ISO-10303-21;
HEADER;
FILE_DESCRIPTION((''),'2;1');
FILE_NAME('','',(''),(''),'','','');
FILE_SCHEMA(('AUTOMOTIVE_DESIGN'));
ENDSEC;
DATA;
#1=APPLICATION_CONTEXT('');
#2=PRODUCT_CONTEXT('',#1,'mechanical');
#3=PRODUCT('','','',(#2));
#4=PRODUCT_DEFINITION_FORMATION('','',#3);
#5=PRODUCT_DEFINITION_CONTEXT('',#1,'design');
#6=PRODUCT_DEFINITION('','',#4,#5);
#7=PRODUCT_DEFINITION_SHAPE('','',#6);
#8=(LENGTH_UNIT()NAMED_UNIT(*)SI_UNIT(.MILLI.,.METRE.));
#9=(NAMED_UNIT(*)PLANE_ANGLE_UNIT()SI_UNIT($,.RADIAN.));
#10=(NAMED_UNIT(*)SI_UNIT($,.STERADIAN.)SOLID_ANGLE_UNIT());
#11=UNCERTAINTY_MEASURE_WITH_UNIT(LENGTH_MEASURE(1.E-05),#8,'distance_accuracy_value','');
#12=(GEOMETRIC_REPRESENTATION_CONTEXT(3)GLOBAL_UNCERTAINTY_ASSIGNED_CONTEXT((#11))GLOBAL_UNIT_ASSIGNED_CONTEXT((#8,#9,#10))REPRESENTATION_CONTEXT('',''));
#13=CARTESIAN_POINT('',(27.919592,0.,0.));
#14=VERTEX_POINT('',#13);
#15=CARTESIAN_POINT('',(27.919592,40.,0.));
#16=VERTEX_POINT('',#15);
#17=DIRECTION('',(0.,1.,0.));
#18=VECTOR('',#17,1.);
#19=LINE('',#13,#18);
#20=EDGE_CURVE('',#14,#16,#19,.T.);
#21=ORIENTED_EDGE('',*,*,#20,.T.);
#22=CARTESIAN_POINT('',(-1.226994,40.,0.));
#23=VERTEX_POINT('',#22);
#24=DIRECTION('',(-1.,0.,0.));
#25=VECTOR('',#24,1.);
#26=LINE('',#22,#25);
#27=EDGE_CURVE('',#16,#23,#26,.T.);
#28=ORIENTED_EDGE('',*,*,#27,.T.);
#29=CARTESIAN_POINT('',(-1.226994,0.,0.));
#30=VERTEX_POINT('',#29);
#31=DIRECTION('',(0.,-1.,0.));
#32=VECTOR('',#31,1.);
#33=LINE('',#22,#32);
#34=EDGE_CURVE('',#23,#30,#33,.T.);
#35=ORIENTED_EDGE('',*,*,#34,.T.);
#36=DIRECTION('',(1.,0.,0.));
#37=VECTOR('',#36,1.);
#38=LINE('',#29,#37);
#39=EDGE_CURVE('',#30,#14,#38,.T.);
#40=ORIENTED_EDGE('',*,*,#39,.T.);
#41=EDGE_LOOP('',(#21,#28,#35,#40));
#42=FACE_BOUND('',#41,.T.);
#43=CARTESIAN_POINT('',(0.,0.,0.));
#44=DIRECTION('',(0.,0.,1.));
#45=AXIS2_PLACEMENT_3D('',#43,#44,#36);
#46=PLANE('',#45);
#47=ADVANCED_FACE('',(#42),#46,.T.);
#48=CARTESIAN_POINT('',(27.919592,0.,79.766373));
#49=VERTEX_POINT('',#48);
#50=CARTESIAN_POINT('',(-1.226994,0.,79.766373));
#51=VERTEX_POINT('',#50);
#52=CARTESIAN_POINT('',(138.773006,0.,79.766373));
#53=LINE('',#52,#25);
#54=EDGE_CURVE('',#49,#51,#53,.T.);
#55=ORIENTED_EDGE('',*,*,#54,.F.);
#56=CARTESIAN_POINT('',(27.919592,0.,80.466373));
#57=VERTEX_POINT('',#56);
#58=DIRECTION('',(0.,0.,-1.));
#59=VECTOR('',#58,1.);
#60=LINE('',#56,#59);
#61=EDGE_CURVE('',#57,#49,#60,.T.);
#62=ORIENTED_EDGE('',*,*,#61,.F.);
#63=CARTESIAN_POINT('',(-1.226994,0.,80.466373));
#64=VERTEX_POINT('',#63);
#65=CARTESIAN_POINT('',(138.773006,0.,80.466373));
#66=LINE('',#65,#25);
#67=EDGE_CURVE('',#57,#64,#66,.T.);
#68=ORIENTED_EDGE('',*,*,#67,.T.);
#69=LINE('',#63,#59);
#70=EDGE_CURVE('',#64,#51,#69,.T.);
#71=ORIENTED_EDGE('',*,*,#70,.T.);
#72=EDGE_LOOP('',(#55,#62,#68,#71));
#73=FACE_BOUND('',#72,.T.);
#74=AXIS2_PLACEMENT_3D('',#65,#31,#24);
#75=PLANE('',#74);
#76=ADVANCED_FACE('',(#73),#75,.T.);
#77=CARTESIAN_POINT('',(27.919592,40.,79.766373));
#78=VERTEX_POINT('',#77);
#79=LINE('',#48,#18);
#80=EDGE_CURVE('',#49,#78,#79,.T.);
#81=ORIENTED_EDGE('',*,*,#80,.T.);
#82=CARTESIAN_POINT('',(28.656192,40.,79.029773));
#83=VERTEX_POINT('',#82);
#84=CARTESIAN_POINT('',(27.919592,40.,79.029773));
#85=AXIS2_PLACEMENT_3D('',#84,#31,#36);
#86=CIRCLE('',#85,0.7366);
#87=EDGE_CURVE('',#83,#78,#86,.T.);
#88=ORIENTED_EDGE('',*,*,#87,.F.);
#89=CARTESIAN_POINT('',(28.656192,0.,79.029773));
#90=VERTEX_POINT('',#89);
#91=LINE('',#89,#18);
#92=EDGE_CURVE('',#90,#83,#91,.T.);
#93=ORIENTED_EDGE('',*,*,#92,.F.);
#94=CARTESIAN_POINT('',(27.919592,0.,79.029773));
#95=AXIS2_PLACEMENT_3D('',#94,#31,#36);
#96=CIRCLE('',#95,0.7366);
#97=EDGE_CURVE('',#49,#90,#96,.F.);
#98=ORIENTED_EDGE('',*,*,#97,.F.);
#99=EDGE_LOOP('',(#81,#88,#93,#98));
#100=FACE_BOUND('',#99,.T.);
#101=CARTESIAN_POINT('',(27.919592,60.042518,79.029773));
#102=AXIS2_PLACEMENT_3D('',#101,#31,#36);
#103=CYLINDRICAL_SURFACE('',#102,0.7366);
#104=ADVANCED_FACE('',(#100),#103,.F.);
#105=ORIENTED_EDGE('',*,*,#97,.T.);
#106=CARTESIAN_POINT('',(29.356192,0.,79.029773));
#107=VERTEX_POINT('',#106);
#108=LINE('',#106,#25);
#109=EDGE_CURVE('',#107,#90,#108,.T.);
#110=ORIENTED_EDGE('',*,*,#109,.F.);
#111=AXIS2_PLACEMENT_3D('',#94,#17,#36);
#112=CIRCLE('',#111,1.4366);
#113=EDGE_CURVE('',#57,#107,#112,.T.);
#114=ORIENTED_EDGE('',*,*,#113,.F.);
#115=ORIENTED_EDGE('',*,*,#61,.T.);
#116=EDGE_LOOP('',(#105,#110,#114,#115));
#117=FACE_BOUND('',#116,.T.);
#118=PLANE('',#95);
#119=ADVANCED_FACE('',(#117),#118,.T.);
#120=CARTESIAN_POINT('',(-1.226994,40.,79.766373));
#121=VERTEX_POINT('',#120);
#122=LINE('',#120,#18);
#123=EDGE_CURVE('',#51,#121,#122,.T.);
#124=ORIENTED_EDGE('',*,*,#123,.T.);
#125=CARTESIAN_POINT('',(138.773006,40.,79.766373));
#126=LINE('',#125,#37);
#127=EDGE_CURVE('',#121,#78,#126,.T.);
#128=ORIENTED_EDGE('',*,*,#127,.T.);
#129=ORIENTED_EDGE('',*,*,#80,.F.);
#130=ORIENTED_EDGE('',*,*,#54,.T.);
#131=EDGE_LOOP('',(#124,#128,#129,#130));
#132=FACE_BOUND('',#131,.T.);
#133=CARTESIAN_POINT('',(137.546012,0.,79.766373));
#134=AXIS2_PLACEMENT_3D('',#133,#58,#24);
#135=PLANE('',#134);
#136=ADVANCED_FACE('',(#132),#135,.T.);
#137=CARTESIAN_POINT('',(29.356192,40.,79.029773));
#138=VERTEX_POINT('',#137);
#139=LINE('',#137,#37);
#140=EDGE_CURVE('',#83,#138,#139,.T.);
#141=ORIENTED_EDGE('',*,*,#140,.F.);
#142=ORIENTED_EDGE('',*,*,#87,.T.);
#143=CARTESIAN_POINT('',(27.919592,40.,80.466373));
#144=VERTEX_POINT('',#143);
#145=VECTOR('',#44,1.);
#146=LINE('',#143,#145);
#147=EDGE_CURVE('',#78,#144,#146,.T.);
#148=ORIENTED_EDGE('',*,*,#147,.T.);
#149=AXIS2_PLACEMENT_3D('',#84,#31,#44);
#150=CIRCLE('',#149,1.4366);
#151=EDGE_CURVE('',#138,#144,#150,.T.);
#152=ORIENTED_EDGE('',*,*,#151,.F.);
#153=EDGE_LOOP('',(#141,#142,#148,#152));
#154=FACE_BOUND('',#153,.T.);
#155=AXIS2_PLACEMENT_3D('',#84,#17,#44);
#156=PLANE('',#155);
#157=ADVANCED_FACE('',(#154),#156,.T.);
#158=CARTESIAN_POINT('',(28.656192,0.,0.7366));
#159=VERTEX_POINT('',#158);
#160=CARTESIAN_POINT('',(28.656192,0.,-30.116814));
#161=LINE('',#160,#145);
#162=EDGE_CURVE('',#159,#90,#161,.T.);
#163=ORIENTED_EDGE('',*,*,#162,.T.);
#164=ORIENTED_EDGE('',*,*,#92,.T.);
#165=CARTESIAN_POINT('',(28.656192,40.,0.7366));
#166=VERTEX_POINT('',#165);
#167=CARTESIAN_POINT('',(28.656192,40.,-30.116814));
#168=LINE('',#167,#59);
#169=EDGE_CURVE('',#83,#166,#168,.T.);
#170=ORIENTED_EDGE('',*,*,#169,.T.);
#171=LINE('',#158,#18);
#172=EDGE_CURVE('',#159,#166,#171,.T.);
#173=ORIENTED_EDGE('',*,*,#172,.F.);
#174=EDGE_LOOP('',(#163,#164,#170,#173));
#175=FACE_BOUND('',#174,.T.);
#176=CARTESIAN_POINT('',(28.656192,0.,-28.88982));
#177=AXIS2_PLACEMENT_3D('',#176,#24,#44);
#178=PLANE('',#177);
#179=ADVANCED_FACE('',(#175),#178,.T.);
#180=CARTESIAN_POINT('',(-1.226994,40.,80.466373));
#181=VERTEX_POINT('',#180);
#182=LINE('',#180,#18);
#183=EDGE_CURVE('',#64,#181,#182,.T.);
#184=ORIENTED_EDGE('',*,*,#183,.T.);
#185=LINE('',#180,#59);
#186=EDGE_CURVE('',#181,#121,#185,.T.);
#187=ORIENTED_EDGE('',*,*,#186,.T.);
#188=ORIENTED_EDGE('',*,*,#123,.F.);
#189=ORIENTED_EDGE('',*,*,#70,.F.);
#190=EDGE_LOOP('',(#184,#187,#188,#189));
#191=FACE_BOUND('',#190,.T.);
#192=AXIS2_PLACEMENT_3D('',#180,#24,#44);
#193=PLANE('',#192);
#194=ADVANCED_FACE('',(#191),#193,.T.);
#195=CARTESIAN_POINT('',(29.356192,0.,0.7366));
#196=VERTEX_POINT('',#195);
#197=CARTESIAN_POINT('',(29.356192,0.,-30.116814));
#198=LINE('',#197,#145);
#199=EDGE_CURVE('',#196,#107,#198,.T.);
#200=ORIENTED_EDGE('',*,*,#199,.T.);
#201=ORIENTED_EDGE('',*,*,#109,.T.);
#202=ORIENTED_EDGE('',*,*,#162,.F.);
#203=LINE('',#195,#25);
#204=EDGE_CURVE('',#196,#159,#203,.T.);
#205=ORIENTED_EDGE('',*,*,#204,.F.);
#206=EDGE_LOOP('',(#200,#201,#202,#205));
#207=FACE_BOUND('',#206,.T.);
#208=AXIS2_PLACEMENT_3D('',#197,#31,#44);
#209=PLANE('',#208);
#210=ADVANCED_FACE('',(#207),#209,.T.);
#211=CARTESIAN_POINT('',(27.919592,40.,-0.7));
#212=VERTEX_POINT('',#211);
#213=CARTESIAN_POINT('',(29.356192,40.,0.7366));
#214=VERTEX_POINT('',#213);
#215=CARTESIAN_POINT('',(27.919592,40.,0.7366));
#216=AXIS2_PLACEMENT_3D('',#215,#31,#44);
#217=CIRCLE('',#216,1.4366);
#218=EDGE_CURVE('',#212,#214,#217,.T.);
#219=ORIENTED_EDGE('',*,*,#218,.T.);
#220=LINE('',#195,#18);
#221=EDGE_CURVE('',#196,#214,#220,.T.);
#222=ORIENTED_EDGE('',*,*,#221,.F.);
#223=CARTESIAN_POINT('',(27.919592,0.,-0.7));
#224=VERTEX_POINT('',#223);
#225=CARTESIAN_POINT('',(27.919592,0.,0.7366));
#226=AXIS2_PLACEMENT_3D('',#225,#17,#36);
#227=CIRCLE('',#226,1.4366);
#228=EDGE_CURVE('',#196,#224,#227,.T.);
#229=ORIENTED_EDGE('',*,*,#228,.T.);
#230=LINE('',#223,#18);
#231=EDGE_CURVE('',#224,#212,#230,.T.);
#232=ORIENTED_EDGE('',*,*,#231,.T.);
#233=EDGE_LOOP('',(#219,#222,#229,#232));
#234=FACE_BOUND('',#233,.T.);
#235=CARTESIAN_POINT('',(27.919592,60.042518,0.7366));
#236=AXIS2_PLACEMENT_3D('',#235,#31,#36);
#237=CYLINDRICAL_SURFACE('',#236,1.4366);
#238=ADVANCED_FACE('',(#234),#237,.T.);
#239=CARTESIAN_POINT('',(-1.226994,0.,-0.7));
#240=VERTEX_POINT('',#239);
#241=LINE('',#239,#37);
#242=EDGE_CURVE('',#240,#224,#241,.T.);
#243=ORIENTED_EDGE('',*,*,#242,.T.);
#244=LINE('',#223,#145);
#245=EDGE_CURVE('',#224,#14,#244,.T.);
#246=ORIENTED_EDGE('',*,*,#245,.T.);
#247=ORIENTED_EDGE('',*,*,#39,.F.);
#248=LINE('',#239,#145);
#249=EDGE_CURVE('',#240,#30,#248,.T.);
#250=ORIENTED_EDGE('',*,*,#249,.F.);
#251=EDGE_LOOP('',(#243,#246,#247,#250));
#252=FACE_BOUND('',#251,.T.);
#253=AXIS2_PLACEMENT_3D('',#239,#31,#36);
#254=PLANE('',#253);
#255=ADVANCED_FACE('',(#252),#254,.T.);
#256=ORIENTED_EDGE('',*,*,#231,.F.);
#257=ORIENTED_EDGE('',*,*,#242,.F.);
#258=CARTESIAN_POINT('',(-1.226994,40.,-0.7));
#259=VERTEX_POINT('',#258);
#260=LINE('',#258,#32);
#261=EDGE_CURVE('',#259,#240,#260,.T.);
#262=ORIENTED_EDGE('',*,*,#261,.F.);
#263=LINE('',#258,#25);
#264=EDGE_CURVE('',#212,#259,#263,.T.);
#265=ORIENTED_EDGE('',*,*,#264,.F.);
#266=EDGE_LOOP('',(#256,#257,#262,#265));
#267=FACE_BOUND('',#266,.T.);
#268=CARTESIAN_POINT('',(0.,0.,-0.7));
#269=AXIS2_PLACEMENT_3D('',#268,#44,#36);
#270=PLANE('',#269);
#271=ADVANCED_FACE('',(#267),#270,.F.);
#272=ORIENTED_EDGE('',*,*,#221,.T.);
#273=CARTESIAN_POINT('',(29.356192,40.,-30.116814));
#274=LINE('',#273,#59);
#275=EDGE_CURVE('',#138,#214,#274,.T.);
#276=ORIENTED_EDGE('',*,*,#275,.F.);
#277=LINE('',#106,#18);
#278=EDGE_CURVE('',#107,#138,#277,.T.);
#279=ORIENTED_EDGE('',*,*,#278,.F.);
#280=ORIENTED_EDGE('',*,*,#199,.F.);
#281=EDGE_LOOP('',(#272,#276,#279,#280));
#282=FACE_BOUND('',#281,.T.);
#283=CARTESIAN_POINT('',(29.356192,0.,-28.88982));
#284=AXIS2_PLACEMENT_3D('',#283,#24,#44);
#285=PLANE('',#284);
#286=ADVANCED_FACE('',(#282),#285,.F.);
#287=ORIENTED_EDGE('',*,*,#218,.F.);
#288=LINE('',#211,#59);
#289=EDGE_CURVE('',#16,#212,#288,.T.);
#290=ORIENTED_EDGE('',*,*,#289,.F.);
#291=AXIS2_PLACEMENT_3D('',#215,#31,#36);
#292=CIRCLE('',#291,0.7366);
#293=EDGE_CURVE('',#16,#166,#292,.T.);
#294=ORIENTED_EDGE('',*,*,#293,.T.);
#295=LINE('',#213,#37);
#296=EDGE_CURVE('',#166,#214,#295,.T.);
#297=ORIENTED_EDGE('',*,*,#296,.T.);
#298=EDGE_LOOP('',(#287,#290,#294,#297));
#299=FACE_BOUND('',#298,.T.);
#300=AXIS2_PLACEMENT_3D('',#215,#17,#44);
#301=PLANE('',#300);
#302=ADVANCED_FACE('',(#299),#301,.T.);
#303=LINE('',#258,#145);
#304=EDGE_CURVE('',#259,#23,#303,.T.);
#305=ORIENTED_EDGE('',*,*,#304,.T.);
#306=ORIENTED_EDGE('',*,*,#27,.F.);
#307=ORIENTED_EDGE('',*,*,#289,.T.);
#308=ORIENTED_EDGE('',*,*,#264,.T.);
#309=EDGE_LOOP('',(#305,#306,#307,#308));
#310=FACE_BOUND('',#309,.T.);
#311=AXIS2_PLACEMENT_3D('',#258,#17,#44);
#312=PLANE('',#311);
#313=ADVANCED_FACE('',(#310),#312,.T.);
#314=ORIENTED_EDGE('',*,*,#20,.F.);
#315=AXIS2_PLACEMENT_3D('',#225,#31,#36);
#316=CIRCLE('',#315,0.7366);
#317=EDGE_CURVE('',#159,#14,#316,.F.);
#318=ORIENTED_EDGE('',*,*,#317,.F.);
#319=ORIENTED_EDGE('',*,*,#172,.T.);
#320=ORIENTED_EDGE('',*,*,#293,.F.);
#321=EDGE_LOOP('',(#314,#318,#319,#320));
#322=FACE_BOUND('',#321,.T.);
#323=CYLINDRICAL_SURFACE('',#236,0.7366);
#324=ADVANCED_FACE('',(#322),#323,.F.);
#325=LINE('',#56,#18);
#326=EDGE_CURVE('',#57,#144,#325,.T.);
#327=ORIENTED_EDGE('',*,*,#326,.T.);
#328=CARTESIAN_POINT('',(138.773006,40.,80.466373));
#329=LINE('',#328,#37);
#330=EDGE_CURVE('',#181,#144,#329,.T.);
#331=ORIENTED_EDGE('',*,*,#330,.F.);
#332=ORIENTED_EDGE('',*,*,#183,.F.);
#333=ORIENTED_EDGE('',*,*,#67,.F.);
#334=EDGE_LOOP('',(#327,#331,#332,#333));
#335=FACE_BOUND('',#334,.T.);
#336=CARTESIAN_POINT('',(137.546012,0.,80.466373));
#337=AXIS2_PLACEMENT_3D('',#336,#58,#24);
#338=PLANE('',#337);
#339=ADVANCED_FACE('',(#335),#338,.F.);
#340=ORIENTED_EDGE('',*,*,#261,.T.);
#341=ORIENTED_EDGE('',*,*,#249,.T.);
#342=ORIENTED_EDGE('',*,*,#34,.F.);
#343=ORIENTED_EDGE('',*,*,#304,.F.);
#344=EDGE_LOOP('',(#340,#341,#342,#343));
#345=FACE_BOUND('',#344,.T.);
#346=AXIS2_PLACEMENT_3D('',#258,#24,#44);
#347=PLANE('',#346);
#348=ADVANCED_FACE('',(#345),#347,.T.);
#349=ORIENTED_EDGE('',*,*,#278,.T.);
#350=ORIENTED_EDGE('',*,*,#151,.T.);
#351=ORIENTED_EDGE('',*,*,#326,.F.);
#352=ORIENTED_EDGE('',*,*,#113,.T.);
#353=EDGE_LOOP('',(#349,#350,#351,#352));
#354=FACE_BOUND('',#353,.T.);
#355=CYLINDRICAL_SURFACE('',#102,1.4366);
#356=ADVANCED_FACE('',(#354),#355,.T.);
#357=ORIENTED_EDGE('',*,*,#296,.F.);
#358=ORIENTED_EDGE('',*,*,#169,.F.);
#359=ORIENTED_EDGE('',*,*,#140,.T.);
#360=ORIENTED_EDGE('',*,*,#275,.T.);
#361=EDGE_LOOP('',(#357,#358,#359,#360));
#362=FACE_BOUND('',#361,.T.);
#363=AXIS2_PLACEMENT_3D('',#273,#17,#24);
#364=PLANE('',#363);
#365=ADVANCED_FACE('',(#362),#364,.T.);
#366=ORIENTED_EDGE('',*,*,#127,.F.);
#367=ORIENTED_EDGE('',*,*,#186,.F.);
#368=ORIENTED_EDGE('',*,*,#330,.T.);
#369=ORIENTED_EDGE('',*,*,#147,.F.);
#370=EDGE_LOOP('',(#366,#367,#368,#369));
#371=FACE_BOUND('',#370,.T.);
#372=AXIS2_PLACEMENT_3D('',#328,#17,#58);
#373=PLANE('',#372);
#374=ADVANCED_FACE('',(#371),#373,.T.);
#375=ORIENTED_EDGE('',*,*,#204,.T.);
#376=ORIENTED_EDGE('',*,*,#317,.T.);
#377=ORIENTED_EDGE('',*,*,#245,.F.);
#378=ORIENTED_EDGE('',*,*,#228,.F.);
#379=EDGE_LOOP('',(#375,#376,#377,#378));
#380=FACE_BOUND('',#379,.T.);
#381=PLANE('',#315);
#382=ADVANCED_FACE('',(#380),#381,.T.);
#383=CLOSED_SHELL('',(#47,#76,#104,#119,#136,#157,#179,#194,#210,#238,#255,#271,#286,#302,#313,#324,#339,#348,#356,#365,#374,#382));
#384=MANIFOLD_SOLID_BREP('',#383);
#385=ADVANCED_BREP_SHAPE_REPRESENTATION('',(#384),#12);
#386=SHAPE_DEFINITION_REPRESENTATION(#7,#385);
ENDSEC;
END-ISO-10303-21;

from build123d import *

# Parameters (mm, degrees)
SKETCH1_W              = 140
SKETCH1_H              = 40
BASE_FLANGE1_DEPTH     = 0.7
SKETCHED_BEND1_DEPTH   = 40
SKETCHED_BEND1_2_DEPTH = 40


# Read off the part's stored shape, not the designer's step: Sketched Bend1
# Sheet-metal steps are written as plain solids
with BuildPart() as part:
    # Sketch1 → Base-Flange1 (new body)
    with BuildSketch(Plane.XY):
        with Locations((68.773006135, 20)):
            Rectangle(SKETCH1_W, SKETCH1_H)
    extrude(amount=-BASE_FLANGE1_DEPTH)

    # Sketched Bend1 outline → Sketched Bend1 (cut)
    with BuildSketch(Plane(origin=(0, 0, 0), x_dir=(1, 0, 0), z_dir=(0, 1, 0))):
        with BuildLine():
            ThreePointArc((27.919592491, 0.7), (28.628683458, 0.512803681), (29.152978075, 0))
            Line((29.152978075, 0), (138.773006135, 0))
            Line((138.773006135, 0), (138.773006135, 0.7))
            Line((138.773006135, 0.7), (27.919592491, 0.7))
        make_face()
    extrude(amount=SKETCHED_BEND1_DEPTH, mode=Mode.SUBTRACT)

    # Sketched Bend1 2 outline → Sketched Bend1 2 (add)
    with BuildSketch(Plane(origin=(0, 0, 0), x_dir=(1, 0, 0), z_dir=(0, 1, 0))):
        with BuildLine():
            ThreePointArc((27.919592491, 0), (28.440447346, -0.215745145), (28.656192491, -0.7366))
            Line((28.656192491, -0.7366), (28.656192491, -79.029772711))
            ThreePointArc((28.656192491, -79.029772711), (28.440447346, -79.550627566), (27.919592491, -79.766372711))
            Line((27.919592491, -79.766372711), (-1.226993865, -79.766372711))
            Line((-1.226993865, -79.766372711), (-1.226993865, -80.466372711))
            Line((-1.226993865, -80.466372711), (27.919592491, -80.466372711))
            ThreePointArc((27.919592491, -80.466372711), (28.935422092, -80.045602313), (29.356192491, -79.029772711))
            Line((29.356192491, -79.029772711), (29.356192491, -0.7366))
            ThreePointArc((29.356192491, -0.7366), (29.304457338, -0.354541216), (29.152978075, 0))
            Line((29.152978075, 0), (27.919592491, 0))
        make_face()
    extrude(amount=SKETCHED_BEND1_2_DEPTH)


solid = part.part
